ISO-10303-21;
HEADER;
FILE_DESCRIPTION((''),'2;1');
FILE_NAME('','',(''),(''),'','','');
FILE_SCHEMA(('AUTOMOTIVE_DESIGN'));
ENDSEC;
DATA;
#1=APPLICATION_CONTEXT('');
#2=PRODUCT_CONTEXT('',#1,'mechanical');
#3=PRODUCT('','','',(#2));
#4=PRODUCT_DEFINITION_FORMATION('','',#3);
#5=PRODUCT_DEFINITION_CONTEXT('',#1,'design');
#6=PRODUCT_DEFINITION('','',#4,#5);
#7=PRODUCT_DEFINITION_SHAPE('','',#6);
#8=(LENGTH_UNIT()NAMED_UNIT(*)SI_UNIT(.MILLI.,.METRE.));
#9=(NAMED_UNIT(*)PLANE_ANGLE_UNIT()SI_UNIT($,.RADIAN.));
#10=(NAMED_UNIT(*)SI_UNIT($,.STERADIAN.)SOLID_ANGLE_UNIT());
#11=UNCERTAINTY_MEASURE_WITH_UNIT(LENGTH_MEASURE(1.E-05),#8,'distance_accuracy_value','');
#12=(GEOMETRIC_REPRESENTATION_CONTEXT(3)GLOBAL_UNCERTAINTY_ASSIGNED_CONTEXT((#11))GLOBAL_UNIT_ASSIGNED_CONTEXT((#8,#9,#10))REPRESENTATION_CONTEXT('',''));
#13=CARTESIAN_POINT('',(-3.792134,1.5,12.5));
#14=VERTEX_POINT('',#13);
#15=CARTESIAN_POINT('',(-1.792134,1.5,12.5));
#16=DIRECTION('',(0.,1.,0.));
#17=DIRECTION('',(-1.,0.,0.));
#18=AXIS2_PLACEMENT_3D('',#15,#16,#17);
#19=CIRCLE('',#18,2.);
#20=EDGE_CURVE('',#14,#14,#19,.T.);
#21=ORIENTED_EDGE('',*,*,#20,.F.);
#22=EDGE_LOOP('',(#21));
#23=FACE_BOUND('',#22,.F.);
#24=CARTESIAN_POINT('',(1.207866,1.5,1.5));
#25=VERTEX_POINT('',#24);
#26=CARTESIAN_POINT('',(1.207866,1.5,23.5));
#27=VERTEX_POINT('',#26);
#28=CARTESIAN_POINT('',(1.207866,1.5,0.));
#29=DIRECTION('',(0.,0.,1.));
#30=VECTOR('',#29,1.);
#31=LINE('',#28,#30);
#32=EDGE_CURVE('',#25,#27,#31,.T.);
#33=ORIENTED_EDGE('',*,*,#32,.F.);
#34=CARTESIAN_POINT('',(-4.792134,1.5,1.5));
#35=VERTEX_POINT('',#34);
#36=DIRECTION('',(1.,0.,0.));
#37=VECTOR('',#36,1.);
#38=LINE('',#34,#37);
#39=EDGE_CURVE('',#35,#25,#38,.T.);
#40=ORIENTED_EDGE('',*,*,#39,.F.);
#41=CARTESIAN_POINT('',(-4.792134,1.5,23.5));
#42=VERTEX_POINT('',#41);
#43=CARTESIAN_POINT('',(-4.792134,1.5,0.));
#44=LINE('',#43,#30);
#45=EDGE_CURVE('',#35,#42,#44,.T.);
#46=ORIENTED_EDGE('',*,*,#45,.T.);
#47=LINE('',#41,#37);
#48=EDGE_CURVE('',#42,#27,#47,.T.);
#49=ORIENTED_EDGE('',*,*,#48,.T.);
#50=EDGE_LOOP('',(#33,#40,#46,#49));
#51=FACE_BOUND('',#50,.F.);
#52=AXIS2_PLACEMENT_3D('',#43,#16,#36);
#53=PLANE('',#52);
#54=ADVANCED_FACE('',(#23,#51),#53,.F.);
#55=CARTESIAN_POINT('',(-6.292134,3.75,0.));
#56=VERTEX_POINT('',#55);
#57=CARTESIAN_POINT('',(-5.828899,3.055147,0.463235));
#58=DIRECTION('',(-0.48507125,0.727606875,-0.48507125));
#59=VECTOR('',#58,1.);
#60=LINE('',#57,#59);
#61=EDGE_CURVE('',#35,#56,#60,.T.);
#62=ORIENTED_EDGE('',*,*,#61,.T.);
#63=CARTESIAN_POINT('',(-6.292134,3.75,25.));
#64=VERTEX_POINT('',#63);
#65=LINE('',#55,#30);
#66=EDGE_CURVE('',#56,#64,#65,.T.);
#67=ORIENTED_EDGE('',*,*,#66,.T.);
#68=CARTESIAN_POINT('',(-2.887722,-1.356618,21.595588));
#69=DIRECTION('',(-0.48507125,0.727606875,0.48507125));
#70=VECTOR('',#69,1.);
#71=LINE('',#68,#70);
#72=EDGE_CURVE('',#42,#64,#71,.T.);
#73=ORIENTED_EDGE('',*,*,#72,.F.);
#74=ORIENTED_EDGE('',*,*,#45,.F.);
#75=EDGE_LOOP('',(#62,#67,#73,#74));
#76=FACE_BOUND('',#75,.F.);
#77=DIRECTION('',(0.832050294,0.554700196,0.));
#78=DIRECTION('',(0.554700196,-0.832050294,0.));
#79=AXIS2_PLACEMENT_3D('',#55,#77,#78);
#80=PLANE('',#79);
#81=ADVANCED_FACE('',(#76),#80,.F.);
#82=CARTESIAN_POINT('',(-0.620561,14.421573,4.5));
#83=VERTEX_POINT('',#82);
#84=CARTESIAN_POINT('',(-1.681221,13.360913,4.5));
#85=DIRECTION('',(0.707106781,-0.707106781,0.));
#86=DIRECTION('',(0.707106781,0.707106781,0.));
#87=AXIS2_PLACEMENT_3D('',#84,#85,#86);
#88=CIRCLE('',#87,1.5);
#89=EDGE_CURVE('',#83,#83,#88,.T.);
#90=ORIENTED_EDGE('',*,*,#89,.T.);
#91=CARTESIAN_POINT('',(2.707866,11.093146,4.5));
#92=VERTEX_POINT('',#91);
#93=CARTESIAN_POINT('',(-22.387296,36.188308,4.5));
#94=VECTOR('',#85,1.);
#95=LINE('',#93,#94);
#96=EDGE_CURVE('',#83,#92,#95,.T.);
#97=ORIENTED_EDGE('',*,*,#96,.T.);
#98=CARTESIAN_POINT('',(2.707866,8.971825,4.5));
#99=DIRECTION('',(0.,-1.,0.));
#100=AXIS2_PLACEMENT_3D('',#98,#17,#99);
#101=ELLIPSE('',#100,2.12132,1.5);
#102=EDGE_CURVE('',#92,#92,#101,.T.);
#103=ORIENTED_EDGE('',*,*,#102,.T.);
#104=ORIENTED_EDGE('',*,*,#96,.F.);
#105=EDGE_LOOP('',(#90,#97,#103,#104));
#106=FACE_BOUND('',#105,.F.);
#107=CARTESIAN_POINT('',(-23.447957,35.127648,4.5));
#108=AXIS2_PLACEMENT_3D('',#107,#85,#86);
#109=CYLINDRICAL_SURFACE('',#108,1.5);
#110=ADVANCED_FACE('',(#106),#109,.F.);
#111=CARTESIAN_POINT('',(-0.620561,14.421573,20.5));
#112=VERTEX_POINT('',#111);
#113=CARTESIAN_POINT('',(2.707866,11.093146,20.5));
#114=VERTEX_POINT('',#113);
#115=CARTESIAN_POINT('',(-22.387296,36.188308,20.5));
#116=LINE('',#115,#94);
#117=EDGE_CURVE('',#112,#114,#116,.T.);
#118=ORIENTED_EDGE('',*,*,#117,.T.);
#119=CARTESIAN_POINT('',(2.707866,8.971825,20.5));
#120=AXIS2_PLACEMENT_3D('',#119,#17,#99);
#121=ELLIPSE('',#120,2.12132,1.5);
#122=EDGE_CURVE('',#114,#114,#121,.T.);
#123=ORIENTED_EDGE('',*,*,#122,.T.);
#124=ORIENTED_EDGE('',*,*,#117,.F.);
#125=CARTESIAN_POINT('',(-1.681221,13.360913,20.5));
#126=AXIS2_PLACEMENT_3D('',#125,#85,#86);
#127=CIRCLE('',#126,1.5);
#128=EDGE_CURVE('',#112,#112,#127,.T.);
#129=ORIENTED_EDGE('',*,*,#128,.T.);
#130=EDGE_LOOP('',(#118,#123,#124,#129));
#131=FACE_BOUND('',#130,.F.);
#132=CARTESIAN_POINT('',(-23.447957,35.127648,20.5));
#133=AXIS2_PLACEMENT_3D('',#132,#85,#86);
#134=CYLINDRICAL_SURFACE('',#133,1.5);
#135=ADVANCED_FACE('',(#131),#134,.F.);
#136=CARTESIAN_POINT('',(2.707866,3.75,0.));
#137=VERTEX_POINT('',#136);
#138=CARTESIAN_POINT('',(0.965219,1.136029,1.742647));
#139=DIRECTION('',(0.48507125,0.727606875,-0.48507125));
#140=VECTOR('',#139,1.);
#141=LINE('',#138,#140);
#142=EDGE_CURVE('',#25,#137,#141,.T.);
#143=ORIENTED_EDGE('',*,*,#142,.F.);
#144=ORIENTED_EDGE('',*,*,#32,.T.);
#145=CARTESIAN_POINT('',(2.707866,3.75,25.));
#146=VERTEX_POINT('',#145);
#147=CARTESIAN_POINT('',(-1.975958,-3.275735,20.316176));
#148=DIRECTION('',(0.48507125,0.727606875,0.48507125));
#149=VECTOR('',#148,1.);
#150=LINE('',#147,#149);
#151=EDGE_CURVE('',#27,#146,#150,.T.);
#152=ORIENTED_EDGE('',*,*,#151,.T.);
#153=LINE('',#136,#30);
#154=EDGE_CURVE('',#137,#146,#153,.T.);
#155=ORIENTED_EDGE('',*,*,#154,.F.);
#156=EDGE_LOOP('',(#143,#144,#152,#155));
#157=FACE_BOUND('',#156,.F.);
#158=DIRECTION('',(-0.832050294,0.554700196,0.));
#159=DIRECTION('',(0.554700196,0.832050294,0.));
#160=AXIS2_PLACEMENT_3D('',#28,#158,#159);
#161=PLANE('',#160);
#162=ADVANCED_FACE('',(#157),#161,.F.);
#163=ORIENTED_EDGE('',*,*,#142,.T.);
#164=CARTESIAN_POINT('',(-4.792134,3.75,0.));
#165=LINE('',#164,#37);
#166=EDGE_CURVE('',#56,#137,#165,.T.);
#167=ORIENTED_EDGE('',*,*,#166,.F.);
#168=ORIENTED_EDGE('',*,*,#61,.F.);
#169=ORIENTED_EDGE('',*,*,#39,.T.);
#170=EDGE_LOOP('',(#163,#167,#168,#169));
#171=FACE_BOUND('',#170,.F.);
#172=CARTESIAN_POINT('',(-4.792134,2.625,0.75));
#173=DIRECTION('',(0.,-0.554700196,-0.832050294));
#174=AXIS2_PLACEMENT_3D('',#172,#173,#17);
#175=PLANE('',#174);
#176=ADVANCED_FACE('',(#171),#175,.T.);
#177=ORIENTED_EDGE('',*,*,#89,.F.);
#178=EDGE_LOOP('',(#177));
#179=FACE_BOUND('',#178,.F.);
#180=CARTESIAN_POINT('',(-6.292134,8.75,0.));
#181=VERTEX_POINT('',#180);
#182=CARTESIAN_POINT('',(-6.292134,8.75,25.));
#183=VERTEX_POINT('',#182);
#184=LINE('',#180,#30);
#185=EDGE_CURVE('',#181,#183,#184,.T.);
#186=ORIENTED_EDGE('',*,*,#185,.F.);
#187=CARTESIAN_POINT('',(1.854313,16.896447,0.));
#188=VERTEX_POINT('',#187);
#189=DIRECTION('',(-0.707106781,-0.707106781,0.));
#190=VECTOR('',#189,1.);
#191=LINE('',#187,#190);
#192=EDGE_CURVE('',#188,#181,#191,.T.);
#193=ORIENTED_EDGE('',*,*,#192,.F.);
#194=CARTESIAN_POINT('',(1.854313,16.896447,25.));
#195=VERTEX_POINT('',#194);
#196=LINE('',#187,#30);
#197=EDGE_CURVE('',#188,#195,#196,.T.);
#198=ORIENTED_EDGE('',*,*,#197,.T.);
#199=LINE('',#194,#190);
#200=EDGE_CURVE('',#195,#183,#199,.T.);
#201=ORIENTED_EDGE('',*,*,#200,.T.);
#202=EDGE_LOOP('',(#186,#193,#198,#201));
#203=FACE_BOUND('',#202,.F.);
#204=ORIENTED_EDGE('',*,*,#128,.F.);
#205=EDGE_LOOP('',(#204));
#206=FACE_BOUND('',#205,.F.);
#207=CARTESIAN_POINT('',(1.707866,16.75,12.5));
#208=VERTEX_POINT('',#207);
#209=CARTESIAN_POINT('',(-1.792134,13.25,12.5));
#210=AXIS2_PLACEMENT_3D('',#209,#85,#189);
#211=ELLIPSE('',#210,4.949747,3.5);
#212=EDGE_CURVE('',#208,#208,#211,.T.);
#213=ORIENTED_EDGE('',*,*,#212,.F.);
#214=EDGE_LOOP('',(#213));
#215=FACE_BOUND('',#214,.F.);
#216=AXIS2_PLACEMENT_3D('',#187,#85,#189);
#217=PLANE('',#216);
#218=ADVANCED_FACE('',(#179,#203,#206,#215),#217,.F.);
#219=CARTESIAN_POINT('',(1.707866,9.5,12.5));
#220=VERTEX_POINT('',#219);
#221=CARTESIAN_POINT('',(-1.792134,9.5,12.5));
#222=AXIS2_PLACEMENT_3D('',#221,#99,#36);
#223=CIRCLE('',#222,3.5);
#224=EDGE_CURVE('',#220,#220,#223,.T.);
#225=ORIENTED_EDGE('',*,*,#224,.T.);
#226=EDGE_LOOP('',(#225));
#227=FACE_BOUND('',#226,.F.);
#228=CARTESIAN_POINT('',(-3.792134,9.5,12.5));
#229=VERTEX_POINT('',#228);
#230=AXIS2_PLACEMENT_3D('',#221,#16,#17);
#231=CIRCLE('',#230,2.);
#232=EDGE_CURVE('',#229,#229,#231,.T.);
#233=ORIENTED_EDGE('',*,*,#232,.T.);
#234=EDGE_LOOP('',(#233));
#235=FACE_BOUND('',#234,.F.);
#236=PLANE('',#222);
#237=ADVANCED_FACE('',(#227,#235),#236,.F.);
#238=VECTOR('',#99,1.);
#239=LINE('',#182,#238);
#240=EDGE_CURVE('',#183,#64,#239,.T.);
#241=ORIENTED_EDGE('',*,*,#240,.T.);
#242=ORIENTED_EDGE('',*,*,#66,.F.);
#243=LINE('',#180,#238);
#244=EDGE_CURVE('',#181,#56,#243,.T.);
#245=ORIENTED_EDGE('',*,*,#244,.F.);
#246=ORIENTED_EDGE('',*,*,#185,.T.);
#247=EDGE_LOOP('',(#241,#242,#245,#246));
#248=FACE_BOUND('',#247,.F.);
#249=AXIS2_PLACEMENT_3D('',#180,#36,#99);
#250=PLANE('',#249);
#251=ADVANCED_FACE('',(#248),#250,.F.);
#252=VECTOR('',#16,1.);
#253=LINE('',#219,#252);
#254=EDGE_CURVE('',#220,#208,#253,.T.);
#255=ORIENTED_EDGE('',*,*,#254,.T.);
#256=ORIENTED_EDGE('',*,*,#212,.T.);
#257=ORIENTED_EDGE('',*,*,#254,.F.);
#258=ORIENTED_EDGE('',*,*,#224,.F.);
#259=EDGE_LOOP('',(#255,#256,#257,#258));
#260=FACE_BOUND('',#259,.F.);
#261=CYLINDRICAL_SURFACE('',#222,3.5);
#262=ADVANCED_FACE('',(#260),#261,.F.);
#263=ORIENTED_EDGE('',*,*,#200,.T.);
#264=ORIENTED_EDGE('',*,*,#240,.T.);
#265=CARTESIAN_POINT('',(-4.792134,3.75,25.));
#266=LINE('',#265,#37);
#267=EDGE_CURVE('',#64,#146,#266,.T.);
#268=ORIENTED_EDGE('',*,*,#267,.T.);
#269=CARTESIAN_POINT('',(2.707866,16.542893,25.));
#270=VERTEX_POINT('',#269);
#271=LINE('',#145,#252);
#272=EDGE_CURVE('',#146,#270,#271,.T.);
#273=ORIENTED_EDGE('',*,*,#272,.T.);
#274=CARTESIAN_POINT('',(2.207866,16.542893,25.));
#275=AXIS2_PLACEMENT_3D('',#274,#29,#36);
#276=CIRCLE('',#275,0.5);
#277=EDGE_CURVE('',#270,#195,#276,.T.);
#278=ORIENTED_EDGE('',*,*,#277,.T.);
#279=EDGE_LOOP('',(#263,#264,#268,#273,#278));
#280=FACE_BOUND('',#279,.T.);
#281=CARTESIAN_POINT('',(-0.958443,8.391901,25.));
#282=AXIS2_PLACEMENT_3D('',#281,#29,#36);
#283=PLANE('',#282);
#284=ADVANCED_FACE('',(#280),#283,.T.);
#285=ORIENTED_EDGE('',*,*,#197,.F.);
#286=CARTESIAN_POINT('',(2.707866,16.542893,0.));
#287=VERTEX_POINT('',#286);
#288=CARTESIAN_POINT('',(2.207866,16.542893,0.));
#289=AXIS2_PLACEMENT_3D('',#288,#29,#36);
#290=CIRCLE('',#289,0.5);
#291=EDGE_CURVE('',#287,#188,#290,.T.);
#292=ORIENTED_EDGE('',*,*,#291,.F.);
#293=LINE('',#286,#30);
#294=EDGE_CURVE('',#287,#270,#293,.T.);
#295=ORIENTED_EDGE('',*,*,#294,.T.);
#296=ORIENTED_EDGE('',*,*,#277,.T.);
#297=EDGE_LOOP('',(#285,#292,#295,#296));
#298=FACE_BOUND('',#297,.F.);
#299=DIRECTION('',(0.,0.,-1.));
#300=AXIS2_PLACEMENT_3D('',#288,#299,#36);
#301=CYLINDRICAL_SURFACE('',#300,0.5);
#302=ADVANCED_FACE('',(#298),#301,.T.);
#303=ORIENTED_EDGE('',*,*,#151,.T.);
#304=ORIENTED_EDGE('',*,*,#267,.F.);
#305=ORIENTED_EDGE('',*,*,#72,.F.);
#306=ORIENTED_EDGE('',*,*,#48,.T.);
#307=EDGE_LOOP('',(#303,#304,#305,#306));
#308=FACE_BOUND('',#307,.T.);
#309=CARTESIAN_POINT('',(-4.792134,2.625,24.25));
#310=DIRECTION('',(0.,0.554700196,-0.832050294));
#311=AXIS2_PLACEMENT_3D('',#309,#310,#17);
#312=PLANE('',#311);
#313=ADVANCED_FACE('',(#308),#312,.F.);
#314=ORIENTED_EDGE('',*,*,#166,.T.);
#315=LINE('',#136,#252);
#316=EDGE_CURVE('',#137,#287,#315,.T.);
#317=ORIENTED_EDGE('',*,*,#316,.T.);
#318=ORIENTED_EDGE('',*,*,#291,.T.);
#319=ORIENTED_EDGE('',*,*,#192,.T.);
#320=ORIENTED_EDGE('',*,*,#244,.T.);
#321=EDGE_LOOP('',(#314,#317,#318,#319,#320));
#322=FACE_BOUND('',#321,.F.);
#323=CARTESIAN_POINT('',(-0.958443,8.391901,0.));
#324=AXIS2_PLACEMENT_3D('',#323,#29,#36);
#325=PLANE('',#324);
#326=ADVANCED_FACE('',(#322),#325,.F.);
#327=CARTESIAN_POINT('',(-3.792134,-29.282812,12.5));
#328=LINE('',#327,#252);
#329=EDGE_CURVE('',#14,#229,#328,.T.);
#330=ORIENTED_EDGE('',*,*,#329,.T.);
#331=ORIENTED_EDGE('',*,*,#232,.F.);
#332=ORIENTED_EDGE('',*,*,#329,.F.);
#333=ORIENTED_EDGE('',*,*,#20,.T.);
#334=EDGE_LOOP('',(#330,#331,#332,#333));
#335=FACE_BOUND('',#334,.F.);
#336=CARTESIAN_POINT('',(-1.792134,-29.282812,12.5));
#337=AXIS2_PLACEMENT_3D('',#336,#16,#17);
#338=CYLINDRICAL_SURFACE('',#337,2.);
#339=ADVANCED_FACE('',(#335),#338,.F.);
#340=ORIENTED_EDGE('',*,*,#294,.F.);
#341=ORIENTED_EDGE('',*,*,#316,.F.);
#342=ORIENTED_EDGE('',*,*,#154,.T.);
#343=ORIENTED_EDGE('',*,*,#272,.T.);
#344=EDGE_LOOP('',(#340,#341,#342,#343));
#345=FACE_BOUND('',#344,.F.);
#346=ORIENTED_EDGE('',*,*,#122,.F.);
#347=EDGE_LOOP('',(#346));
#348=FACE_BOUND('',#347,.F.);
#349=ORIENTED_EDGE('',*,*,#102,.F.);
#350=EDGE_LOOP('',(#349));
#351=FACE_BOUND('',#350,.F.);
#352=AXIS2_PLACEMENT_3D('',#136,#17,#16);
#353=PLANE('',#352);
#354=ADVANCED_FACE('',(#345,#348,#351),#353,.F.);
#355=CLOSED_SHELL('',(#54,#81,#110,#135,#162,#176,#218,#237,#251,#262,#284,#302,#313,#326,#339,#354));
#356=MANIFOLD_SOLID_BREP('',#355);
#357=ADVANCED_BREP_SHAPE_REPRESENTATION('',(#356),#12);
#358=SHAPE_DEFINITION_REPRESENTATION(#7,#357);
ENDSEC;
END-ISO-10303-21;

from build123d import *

# Parameters (mm, degrees)
F1_DEPTH = 25
F2_SIZE2 = 2.25
F2_SIZE  = 1.5
F4_D     = 4
F6_D     = 3
F9_D     = 7
F9_DEPTH = 7.5438932188


# Not quite as in the source:
# - a feature names something its author has since deleted; it is built from what else it names


with BuildPart() as f1:
    # F0 (on Top) → F1 (new body)
    with BuildSketch(Plane.XY):
        with BuildLine():
            Line((2.7078659423, 3.7500000373), (2.7078659423, 8.7500000373))
            Line((2.7078659423, 8.7500000373), (2.7078659423, 16.5428932561))
            ThreePointArc((2.7078659423, 16.5428932561), (2.3992076585, 17.0048330223), (1.8543125517, 16.8964466467))
            Line((1.8543125517, 16.8964466467), (-6.2921340577, 8.7500000373))
            Line((-6.2921340577, 8.7500000373), (-6.2921340577, 3.7500000373))
            Line((-6.2921340577, 3.7500000373), (-4.7921340577, 1.5000000373))
            Line((-4.7921340577, 1.5000000373), (1.2078659423, 1.5000000373))
            Line((1.2078659423, 1.5000000373), (2.7078659423, 3.7500000373))
        make_face()
    extrude(amount=F1_DEPTH)

    # F2
    f2_edges = [f1.edges().sort_by_distance(p)[0] for p in [
        (-1.792134, 1.5, 25),
        (-1.792134, 1.5, 0),
    ]]
    chamfer(f2_edges, length=F2_SIZE, length2=F2_SIZE2)

    # F4 (through all)
    with Locations(Plane.XZ.offset(-1.5000000373)):
        with Locations((-1.7921340577, 12.5)):
            Hole(F4_D / 2)

    # F6 (through all)
    with Locations(Plane(origin=(-7.5210670475, 7.5210670475, 0), x_dir=(-0.7071067812, -0.7071067812, 0), z_dir=(-0.7071067812, 0.7071067812, 0))):
        with Locations((-8.2587889815, 4.5), (-8.2587889815, 20.5)):
            Hole(F6_D / 2)

    # F9 (through all, one way)
    with BuildSketch(Plane.XZ.offset(-9.5000000373)):
        with Locations((-1.7921340577, 12.5)):
            Circle(F9_D / 2)
    extrude(amount=-F9_DEPTH, mode=Mode.SUBTRACT)


solid = f1.part
